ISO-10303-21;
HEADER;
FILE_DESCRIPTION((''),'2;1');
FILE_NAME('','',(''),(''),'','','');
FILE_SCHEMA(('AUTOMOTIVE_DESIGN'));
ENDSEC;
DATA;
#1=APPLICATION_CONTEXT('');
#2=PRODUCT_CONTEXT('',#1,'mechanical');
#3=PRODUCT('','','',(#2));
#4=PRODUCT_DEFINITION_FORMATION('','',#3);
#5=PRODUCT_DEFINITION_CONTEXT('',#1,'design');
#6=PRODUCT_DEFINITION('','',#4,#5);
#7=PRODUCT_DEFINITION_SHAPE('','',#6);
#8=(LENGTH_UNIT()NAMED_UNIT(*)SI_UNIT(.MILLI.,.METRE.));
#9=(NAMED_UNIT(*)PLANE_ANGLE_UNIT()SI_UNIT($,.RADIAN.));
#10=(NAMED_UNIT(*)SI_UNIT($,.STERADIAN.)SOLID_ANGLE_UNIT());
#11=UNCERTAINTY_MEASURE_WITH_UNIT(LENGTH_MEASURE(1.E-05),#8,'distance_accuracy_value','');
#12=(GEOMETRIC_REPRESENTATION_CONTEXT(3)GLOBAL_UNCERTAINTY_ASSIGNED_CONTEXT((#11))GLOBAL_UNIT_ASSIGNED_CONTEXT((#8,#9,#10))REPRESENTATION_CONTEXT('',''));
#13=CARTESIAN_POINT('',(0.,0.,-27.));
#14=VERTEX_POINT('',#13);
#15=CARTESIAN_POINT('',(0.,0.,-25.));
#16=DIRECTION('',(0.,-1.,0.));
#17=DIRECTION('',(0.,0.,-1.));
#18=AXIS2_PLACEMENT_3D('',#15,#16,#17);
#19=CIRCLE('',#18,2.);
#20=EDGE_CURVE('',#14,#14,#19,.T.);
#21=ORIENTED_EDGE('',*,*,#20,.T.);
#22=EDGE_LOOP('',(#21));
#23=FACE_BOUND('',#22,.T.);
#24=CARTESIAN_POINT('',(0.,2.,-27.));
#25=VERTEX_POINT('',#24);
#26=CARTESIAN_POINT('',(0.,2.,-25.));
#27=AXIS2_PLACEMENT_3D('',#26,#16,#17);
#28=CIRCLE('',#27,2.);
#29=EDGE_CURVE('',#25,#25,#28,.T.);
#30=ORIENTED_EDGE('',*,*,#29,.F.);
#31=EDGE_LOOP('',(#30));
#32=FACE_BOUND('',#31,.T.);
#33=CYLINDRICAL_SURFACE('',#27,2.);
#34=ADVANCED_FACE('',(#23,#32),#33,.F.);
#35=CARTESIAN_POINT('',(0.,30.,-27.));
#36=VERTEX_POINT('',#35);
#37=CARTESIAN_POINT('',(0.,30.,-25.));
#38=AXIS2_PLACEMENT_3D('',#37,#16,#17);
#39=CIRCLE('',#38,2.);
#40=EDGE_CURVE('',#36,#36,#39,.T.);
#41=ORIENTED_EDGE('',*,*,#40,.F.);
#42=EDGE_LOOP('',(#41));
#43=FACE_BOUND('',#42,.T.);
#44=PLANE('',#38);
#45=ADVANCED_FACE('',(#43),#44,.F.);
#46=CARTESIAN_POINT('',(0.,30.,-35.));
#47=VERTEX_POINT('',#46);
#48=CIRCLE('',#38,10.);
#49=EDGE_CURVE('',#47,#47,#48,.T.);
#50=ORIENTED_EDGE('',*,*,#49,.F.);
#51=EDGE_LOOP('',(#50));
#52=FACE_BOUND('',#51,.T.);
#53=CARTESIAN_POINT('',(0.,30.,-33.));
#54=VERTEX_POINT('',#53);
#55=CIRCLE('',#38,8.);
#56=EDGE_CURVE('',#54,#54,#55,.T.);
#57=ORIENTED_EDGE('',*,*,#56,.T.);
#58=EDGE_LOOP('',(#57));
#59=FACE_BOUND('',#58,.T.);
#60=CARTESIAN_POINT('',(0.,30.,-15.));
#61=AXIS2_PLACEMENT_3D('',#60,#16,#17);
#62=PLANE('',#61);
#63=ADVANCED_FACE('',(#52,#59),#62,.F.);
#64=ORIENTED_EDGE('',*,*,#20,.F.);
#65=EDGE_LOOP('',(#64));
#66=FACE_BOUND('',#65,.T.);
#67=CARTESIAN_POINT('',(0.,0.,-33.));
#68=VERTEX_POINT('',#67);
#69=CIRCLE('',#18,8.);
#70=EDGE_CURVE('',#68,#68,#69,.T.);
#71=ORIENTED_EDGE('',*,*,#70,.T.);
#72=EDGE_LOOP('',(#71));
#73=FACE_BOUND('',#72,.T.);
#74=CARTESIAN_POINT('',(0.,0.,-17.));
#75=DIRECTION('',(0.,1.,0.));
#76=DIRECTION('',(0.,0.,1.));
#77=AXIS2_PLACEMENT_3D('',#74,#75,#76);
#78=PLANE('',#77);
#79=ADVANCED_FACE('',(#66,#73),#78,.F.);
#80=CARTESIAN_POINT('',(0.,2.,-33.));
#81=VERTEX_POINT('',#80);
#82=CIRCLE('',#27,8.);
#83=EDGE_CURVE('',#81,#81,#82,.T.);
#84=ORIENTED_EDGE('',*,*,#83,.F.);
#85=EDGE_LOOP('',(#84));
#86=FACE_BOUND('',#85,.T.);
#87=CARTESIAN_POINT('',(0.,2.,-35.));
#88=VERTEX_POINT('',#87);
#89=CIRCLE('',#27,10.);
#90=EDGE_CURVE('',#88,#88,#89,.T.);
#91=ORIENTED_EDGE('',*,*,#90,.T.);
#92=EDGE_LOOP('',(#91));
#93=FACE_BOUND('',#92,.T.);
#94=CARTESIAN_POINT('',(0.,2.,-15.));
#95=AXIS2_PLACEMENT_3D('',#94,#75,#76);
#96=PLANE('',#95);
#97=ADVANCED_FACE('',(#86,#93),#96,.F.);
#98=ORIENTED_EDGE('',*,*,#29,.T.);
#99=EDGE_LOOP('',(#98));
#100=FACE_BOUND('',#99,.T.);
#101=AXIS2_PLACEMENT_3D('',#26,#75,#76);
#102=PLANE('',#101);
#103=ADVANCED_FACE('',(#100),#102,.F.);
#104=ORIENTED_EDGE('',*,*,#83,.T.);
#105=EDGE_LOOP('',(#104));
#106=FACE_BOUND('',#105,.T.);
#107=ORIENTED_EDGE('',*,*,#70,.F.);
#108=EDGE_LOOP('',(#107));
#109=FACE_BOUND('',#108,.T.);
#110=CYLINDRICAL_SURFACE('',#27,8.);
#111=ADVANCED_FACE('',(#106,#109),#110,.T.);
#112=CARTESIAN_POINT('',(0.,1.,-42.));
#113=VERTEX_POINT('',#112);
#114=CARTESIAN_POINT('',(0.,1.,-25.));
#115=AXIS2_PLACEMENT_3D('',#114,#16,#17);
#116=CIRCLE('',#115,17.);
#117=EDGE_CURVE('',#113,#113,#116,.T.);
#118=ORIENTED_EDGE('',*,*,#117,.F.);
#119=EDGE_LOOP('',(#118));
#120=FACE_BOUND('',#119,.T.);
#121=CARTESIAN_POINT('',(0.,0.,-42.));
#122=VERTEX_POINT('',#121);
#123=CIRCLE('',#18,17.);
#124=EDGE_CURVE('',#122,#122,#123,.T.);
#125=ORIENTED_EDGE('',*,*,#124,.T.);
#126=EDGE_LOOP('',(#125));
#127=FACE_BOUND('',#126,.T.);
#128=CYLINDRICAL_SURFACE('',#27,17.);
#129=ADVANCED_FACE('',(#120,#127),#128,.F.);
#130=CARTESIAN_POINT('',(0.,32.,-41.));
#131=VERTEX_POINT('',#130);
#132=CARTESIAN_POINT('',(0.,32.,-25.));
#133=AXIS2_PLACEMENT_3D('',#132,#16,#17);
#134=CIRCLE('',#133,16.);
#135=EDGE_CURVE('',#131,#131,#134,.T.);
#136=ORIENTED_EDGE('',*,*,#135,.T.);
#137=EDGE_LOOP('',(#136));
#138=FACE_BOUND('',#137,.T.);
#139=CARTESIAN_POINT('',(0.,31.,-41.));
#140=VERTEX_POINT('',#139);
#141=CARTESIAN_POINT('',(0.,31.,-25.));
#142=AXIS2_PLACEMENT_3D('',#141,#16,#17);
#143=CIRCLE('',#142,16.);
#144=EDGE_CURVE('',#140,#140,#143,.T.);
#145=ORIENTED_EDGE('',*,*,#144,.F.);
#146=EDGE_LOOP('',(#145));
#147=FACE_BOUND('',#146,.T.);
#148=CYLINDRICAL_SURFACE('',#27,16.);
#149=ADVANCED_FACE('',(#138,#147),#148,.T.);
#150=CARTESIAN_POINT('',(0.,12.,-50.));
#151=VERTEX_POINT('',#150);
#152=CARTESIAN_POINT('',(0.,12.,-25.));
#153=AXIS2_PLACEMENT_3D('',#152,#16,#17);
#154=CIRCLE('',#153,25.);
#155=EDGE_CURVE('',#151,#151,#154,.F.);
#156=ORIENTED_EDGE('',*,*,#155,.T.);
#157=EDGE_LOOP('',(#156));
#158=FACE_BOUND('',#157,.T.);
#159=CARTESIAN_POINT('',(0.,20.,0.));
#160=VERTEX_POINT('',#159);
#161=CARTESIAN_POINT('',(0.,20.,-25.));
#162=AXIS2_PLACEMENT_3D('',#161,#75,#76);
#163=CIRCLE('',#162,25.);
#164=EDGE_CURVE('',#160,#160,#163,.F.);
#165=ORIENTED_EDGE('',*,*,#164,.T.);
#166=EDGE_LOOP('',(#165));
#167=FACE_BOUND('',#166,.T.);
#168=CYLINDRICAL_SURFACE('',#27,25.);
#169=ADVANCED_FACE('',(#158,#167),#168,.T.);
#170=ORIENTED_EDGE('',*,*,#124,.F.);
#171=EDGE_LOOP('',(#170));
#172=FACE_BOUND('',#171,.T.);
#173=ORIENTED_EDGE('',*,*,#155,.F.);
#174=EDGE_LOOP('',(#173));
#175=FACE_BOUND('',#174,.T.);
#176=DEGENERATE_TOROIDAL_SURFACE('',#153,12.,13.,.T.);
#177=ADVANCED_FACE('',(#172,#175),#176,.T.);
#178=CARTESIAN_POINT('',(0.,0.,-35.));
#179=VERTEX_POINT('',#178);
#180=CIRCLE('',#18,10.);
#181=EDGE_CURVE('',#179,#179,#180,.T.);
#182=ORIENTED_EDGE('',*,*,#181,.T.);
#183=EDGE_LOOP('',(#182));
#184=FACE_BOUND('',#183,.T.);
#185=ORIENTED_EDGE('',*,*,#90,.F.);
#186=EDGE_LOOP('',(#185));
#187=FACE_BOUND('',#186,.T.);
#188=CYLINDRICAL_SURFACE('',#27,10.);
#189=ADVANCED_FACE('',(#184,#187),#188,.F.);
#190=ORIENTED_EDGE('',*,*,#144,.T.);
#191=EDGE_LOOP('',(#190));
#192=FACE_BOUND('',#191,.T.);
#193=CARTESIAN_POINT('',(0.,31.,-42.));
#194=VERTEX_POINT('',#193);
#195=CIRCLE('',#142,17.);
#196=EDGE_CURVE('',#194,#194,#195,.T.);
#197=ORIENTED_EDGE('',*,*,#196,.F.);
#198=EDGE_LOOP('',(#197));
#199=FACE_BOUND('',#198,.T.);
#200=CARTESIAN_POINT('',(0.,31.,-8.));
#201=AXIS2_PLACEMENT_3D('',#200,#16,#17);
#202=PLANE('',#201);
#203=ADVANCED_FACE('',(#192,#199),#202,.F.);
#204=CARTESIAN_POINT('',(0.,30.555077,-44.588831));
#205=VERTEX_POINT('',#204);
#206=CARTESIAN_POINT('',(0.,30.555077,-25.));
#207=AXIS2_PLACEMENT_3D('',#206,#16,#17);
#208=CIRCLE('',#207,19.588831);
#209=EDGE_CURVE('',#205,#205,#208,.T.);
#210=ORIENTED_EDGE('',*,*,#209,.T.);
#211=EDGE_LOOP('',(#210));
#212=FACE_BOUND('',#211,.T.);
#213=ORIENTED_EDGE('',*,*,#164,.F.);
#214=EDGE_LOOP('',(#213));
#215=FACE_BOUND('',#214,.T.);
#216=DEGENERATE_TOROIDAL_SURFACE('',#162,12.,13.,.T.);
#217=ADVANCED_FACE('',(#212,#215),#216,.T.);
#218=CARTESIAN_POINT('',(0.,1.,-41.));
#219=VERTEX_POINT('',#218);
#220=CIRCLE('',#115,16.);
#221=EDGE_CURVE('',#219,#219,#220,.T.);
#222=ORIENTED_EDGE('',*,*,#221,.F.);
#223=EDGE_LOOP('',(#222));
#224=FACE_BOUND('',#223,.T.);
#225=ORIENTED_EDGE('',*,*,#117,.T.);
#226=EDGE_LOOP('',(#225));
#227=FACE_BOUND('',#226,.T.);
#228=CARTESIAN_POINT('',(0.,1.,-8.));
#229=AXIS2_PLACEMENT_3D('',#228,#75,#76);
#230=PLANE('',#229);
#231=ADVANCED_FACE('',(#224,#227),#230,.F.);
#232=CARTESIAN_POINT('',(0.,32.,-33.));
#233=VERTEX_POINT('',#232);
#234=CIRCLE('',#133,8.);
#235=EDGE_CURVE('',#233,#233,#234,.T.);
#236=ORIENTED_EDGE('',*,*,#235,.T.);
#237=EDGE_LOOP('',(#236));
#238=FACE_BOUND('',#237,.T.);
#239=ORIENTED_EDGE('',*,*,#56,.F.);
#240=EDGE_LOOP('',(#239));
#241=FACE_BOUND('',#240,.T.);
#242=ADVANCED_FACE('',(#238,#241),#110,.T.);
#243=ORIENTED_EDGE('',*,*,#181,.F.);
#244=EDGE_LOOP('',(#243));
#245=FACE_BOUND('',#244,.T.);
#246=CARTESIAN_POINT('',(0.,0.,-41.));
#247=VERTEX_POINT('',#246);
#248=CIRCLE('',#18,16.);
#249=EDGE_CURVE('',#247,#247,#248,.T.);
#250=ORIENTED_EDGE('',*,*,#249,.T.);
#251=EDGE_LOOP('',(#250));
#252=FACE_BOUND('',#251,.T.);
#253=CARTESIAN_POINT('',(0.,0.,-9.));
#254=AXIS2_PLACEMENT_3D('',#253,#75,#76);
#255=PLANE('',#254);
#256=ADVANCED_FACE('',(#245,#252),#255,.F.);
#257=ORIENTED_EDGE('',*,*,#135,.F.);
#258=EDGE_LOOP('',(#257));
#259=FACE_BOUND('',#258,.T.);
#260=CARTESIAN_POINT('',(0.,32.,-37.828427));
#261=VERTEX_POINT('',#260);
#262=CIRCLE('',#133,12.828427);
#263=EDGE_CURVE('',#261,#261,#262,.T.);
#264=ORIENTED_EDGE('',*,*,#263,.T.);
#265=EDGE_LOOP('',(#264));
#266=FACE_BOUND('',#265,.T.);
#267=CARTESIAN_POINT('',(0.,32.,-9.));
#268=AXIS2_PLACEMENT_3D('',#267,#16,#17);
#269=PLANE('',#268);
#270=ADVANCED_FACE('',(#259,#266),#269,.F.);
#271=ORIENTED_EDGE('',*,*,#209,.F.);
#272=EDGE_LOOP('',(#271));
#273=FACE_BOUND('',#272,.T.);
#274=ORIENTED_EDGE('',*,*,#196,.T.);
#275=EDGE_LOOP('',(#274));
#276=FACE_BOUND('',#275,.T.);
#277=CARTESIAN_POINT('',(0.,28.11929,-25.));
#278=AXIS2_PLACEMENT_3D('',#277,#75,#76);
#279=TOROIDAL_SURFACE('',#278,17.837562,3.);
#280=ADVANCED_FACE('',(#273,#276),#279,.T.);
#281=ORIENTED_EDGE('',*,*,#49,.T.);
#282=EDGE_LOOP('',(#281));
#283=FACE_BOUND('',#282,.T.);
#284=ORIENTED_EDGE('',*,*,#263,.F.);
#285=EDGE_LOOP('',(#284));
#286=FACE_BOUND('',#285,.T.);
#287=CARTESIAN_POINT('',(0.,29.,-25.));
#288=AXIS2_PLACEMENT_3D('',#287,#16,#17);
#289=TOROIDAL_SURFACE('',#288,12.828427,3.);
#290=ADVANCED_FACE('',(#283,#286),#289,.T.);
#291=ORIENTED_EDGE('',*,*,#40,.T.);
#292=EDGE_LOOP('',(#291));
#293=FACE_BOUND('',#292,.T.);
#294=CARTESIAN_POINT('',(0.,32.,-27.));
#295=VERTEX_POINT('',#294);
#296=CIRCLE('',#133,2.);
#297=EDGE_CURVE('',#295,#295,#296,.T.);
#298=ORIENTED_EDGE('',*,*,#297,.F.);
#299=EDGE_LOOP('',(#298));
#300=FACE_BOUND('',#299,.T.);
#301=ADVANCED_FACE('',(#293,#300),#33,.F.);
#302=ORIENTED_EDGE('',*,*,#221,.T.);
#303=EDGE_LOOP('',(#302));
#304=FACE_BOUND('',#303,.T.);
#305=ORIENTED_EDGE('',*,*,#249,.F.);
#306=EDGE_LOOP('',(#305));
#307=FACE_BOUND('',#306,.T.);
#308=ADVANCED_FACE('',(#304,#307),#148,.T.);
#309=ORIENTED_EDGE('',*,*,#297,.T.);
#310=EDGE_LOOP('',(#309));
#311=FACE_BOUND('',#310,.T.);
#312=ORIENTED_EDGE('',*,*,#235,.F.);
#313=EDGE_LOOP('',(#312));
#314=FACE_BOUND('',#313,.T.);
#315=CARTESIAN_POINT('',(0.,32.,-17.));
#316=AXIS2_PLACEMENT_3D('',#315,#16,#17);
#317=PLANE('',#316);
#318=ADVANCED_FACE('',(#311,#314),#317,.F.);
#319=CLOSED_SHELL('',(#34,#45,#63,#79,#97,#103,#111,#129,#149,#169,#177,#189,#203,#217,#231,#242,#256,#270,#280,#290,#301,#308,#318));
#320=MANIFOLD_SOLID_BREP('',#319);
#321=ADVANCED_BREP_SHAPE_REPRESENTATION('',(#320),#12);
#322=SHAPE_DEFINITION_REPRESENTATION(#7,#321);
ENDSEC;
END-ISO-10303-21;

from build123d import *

# Parameters (mm, degrees)
FILLET_1_R = 13
FILLET_3_R = 3
FILLET_4_R = 3


with BuildPart() as part:
    # 草图1 → 旋转1 (revolve)
    with BuildSketch(Plane(origin=(0, 0, 0), x_dir=(0, 0, -1), z_dir=(1, 0, 0)), mode=Mode.PRIVATE) as revolve_1_sk:
        Polygon((17, 32), (23, 32), (23, 30), (25, 30), (25, 2), (23, 2), (23, 0), (17, 0), (17, 2), (15, 2), (15, 0), (9, 0), (9, 1), (8, 1), (8, 0), (0, 0), (0, 32), (8, 32), (8, 31), (9, 31), (9, 32), (15, 32), (15, 30), (17, 30), align=None)
    revolve(revolve_1_sk.sketch.rotate(Axis((0, 2, -25), (0, 1, 0)), 180), axis=Axis((0, 2, -25), (0, 1, 0)))

    # 圆角1
    # the kernel refuses this fillet: 13 mm, written as the material it takes off along each edge
    with BuildSketch(Plane(origin=(0, 0, -25), x_dir=(0, 0, -1), z_dir=(1, 0, 0))) as fillet_1_piece_1:
        with BuildLine():
            CenterArc((12, 12), FILLET_1_R, 292.619864948, 67.380135052)
            Line((25, 12), (25.26, 12))
            Line((25.26, 12), (25.26, 0))
            Line((25.26, 0), (25, -0.26))
            ThreePointArc((25, -0.26), (21, -0.26), (17.1, -0.24))
            Line((17.1, -0.24), (17, 0))
        make_face()
    revolve(axis=Axis((0, 0, -25), (0, 1, 0)), mode=Mode.SUBTRACT)
    with BuildSketch(Plane(origin=(0, 32, -25), x_dir=(0, 0, -1), z_dir=(1, 0, 0))) as fillet_1_piece_2:
        with BuildLine():
            CenterArc((12, -12), FILLET_1_R, 0, 67.380135052)
            Line((17, 0), (17.1, 0.24))
            ThreePointArc((17.1, 0.24), (21, 0.26), (25, 0.26))
            Line((25, 0.26), (25.26, 0))
            Line((25.26, 0), (25.26, -12))
            Line((25.26, -12), (25, -12))
        make_face()
    revolve(axis=Axis((0, 32, -25), (0, 1, 0)), mode=Mode.SUBTRACT)

    # 圆角3
    # the kernel refuses this fillet: 3 mm, written as the material it takes off along each edge
    with BuildSketch(Plane(origin=(0, 32, -25), x_dir=(0, 0, -1), z_dir=(1, 0, 0))) as fillet_3_piece_1:
        with BuildLine():
            CenterArc((12.828427125, -3), FILLET_3_R, 90, 70.528779366)
            Line((12.828427125, 0), (12.828427125, 0.06))
            Line((12.828427125, 0.06), (10, 0.06))
            Line((10, 0.06), (9.94, 0))
            ThreePointArc((9.94, 0), (9.94, -1), (9.943431458, -1.98))
            Line((9.943431458, -1.98), (10, -2))
        make_face()
    revolve(axis=Axis((0, 32, -25), (0, 1, 0)), mode=Mode.SUBTRACT)

    # 圆角4
    # the kernel refuses this fillet: 3 mm, written as the material it takes off along each edge
    with BuildSketch(Plane(origin=(0, 32, -25), x_dir=(0, 0, -1), z_dir=(1, 0, 0))) as fillet_4_piece_1:
        with BuildLine():
            CenterArc((17.837561952, -3.880709978), FILLET_4_R, 54.28483058, 51.926876677)
            Line((19.588830537, -1.444922971), (19.623855909, -1.396207231))
            ThreePointArc((19.623855909, -1.396207231), (18.364982894, -0.596027325), (17.023076923, 0.055384615))
            Line((17.023076923, 0.055384615), (16.94, 0))
            ThreePointArc((16.94, 0), (16.94, -0.5), (16.983248761, -0.9423858))
            Line((16.983248761, -0.9423858), (17, -1))
        make_face()
    revolve(axis=Axis((0, 32, -25), (0, 1, 0)), mode=Mode.SUBTRACT)


solid = part.part
